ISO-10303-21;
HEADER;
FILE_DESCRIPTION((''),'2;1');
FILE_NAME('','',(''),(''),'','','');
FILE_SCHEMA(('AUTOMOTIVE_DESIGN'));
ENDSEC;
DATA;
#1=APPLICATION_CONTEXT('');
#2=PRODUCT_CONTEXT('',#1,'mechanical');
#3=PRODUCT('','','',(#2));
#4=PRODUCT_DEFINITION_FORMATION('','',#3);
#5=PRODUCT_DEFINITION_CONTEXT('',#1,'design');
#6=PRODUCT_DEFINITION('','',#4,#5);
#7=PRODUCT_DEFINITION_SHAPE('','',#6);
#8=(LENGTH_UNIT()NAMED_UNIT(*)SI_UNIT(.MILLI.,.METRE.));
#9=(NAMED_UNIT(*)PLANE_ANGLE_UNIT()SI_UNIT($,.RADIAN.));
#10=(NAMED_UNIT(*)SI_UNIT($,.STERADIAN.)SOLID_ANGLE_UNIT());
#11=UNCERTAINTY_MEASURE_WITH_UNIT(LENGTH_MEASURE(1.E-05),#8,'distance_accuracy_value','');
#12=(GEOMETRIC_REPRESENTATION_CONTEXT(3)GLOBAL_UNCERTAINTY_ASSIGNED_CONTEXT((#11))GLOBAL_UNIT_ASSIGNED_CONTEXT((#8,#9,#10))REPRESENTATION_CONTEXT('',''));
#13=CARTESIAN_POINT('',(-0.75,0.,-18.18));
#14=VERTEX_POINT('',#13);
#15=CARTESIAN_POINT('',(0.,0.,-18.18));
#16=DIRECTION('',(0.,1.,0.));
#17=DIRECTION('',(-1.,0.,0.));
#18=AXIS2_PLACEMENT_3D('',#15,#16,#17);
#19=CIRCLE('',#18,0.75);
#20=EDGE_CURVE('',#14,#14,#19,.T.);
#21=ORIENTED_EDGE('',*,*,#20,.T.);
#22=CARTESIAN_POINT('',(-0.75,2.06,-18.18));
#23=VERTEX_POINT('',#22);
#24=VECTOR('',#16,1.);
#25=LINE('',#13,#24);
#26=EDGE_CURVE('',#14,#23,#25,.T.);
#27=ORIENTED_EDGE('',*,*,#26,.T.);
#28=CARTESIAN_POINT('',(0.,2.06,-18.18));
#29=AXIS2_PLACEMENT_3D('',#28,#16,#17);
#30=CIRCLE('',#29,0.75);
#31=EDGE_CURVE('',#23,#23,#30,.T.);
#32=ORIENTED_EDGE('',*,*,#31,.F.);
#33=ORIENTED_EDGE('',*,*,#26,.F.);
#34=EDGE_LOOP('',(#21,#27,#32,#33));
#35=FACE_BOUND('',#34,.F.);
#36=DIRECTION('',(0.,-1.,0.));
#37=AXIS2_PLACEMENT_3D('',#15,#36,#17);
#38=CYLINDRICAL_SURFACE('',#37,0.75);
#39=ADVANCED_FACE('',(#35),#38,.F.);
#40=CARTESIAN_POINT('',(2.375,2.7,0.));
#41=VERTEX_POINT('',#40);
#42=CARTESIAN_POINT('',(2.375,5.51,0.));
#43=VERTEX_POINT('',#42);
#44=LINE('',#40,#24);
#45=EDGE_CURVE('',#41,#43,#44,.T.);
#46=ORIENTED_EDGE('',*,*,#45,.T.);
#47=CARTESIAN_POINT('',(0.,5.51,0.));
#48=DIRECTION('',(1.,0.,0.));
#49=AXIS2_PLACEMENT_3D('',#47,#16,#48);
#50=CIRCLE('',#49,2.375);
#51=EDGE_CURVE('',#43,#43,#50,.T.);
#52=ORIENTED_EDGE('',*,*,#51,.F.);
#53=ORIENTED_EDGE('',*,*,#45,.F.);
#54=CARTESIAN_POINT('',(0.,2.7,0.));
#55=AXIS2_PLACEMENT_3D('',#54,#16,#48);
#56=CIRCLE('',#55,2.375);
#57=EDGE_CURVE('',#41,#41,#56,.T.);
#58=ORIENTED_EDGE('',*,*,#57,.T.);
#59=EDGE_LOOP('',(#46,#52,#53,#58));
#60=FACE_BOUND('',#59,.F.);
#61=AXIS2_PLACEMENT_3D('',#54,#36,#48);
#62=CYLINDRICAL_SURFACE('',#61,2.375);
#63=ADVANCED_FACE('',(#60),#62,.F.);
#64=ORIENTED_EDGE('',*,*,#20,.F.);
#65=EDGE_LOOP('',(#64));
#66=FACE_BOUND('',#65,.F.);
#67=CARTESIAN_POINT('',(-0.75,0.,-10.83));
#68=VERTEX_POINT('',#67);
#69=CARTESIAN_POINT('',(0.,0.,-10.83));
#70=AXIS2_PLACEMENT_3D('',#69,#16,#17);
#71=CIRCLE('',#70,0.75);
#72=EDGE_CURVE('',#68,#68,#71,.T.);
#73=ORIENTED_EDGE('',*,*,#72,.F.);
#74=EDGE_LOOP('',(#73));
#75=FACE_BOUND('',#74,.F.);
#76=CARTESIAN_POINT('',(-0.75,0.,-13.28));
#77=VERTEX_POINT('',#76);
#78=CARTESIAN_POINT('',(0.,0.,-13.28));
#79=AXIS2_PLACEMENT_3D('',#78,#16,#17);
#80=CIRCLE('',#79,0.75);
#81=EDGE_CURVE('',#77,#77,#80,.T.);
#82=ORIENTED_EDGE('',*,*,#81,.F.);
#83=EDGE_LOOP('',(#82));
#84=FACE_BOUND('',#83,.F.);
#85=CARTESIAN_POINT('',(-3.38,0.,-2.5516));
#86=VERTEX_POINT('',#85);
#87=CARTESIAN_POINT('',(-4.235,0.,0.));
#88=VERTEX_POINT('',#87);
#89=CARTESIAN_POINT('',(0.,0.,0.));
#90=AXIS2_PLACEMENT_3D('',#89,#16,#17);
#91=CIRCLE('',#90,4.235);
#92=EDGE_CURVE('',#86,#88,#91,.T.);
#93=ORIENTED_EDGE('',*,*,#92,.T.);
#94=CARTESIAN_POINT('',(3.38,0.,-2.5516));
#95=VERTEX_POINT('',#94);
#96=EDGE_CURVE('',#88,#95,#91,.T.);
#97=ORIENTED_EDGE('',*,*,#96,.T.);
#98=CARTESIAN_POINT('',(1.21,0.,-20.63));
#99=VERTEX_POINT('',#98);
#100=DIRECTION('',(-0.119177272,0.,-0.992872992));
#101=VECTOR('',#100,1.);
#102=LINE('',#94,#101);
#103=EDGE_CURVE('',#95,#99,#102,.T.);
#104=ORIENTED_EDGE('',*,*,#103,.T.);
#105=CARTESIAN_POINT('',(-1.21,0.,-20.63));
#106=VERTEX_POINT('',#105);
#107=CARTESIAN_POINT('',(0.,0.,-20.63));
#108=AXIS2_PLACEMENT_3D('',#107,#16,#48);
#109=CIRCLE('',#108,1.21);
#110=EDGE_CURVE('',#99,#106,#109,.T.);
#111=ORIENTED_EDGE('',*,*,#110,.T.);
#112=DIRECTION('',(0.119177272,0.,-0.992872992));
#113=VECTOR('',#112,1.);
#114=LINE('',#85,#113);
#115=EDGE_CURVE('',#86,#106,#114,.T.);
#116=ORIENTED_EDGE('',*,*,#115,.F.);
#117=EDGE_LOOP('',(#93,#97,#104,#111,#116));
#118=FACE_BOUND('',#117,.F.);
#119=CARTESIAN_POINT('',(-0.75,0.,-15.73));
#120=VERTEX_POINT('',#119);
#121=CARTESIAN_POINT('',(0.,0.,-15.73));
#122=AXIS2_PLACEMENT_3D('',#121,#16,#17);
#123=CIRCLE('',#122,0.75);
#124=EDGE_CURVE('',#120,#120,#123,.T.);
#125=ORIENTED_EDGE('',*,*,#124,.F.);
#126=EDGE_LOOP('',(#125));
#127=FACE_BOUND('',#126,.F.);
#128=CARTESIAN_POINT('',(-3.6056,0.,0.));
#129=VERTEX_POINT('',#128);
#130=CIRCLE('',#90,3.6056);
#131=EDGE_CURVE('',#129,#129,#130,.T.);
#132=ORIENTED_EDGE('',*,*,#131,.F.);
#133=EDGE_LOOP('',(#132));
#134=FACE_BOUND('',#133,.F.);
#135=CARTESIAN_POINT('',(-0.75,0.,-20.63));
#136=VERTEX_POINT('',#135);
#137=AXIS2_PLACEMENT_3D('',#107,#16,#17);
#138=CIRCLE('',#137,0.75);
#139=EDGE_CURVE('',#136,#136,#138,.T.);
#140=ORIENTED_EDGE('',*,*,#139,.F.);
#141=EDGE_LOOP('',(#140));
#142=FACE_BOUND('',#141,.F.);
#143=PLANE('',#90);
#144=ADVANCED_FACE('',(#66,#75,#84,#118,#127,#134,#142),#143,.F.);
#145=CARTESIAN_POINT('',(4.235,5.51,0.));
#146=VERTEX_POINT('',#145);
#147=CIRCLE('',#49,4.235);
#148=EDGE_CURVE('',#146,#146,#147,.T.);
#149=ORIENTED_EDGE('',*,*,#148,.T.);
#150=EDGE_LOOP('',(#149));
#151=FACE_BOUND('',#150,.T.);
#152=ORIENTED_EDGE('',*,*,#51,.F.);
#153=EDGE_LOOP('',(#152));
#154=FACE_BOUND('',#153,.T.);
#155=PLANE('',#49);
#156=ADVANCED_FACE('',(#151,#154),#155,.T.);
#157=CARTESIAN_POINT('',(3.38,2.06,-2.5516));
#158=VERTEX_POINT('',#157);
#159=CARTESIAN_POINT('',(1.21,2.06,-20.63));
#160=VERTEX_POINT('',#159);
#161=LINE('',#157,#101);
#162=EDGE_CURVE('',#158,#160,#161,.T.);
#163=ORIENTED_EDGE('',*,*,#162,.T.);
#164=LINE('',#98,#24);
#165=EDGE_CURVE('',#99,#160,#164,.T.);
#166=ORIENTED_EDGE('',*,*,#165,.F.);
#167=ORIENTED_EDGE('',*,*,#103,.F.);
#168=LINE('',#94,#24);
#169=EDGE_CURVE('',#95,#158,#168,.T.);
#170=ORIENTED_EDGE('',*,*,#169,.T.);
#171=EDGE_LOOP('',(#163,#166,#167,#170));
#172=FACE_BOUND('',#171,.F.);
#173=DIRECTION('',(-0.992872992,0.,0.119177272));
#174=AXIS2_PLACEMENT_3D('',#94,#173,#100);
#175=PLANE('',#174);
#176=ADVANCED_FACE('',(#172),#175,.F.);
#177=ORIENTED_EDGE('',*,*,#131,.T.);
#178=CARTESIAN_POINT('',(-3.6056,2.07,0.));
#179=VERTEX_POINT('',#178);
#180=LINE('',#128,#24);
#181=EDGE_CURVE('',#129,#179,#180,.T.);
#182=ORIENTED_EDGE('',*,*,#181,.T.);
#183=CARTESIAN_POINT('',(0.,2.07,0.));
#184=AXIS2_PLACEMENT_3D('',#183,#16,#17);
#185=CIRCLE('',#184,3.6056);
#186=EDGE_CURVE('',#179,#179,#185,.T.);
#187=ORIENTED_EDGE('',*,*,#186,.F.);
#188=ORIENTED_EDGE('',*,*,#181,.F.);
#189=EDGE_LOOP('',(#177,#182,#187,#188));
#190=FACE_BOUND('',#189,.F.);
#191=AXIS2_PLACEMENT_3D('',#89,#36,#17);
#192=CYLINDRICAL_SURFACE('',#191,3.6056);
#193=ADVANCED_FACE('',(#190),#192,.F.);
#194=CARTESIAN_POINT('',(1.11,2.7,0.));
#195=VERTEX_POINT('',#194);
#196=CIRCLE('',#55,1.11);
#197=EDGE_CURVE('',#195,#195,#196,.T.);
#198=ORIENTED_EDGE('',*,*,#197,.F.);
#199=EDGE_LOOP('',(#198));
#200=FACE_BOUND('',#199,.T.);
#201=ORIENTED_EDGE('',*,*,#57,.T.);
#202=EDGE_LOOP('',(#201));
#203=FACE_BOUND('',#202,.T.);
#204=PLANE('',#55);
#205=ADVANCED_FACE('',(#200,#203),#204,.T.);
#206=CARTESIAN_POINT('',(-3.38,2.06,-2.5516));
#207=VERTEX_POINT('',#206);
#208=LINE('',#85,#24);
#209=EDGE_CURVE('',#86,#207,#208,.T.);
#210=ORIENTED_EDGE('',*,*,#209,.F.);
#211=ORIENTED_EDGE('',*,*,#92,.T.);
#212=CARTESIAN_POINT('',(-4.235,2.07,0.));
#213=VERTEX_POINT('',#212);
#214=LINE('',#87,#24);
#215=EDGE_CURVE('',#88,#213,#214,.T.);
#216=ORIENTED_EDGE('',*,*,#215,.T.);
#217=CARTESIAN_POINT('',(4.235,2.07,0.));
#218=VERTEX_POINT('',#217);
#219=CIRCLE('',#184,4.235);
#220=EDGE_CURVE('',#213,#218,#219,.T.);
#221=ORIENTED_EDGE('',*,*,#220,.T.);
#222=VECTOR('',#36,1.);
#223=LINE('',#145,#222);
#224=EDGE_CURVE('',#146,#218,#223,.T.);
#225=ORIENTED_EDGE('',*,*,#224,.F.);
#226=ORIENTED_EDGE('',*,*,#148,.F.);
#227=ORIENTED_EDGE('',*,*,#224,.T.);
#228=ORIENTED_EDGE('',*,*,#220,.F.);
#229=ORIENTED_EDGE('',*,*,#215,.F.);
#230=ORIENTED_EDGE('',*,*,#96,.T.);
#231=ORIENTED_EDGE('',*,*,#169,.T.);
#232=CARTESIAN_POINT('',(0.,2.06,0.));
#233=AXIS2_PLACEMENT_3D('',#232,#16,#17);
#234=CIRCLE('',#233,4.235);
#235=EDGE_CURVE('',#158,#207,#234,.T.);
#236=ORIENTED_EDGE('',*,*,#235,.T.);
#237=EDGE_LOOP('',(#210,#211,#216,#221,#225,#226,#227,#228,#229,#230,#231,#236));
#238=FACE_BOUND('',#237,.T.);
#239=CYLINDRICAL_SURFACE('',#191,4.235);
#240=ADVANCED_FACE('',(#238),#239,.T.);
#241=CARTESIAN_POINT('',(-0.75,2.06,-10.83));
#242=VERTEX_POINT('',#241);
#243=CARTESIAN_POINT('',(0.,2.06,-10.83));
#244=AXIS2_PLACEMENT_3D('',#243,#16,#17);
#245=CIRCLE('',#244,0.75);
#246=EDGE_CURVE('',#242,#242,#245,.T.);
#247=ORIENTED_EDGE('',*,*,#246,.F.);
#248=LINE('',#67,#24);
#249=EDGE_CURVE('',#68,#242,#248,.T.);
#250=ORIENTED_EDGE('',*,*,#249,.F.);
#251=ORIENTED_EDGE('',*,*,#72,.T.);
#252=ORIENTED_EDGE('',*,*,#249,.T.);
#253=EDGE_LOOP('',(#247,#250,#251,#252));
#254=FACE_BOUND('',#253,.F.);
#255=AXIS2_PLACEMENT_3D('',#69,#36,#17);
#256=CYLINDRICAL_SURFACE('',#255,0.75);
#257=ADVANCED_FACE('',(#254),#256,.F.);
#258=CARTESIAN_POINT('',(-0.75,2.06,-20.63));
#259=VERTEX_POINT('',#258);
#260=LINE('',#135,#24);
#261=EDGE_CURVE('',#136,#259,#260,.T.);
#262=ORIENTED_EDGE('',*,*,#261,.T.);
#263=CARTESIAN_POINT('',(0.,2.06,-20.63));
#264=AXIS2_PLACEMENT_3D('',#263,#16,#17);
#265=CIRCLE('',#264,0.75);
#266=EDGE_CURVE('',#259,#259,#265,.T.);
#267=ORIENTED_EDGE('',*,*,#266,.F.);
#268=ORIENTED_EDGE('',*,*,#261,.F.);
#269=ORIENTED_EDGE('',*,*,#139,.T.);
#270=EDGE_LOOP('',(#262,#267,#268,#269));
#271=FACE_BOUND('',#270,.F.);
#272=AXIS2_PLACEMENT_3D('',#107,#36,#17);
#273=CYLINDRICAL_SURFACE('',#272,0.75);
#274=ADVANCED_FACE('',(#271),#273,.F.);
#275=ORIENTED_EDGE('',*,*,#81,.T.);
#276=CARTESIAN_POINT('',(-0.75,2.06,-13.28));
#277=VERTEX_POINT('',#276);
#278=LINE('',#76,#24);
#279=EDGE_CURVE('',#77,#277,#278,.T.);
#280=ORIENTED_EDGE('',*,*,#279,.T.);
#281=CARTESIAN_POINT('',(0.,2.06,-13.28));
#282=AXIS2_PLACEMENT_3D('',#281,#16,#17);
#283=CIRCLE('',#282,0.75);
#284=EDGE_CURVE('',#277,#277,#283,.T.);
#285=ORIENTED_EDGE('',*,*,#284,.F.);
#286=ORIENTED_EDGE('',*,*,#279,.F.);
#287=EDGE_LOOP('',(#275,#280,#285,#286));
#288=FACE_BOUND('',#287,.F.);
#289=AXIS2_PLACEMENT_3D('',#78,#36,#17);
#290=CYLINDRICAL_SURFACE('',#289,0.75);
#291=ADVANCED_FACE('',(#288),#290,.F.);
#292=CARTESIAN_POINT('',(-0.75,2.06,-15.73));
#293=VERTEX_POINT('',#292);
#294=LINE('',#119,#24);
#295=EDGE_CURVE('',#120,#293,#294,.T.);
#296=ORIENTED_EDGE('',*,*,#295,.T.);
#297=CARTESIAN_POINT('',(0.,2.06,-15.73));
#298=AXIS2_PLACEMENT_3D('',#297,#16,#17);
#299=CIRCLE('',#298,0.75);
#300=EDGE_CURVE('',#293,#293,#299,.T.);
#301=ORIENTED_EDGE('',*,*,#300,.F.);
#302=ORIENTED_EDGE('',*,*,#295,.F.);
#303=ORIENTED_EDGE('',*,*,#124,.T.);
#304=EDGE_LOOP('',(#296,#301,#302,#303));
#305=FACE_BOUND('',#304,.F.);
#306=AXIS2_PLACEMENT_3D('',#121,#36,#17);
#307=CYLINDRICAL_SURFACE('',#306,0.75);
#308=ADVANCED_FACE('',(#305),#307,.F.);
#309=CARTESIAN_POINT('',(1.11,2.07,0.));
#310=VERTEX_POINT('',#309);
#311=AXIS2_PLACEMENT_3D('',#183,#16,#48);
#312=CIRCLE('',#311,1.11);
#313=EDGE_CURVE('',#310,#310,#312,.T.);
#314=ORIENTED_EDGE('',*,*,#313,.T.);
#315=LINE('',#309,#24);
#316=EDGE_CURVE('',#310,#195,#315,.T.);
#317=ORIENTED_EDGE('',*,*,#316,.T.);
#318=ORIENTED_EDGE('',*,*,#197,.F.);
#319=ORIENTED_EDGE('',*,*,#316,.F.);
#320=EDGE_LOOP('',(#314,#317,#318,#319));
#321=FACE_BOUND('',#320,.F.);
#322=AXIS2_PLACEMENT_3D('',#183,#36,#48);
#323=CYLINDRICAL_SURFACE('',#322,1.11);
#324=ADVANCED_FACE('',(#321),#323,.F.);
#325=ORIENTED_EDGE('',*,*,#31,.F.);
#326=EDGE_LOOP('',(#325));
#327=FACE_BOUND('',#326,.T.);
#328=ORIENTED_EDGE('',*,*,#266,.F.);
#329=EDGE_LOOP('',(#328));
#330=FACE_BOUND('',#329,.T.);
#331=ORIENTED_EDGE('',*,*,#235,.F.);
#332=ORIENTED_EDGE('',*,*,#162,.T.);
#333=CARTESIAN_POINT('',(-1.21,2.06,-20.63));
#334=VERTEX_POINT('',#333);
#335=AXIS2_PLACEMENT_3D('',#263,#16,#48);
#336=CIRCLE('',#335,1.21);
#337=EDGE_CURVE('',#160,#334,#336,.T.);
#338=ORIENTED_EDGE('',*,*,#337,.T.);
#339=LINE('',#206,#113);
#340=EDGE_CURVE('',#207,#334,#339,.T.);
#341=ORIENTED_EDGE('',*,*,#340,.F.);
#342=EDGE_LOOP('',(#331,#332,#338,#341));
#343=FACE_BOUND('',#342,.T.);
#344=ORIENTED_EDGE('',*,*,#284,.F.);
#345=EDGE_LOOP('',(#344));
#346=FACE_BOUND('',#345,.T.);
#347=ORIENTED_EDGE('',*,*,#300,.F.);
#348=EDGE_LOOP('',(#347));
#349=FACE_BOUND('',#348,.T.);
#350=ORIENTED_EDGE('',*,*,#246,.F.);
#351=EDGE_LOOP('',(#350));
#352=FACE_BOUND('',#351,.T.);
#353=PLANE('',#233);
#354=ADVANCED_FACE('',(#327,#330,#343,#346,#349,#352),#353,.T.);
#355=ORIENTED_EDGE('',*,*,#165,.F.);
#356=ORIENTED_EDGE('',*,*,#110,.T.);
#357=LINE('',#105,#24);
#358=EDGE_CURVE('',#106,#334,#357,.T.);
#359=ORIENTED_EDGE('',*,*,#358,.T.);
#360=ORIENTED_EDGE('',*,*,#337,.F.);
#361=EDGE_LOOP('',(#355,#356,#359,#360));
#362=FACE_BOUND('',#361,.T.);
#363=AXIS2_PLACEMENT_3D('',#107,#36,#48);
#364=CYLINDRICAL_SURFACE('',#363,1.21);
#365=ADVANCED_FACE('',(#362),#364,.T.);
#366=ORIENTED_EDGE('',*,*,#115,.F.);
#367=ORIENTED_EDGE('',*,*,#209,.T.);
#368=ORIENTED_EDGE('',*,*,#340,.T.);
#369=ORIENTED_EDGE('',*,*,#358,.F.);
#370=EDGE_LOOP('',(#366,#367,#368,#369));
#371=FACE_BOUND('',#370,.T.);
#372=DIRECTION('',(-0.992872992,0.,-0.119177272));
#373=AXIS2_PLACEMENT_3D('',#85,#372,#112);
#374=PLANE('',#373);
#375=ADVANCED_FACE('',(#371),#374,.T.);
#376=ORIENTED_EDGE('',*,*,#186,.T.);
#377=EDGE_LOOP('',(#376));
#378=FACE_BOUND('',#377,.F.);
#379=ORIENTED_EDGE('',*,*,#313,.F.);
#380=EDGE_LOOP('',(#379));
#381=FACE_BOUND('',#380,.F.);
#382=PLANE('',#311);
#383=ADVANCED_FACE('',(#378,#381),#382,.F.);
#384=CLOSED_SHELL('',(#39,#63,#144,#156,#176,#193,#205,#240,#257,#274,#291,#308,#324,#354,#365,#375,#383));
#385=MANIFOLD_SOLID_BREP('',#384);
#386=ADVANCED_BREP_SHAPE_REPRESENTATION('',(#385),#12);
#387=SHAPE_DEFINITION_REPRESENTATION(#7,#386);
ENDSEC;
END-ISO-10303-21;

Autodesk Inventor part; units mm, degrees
ref_plane "YZ Plane" through (0, 0, 0) normal (1, 0, 0) x (0, 1, 0)
ref_plane "XZ Plane" through (0, 0, 0) normal (0, 1, 0) x (-1, 0, 0)
ref_plane "XY Plane" through (0, 0, 0) normal (0, 0, 1) x (1, 0, 0)
sketch "Sketch1" plane through (0, 0, 0) normal (0, 1, 0) x (-1, 0, 0)
  circle A0 centre (0, 0) radius 4.235
  circle A1 centre (0, 0) radius 2.375
  circle A2 centre (0, 0) radius 1.11
  circle A3 centre (0, 0) radius 3.6056
  arc A4 (-1.21, -20.63) -> (1.21, -20.63) centre (0, -20.63) ccw
  line L0 (-3.38, -2.5516) -> (-1.21, -20.63)
  line L1 (3.38, -2.5516) -> (1.21, -20.63)
  circle A5 centre (0, -20.63) radius 0.75
  circle A6 centre (0, -18.18) radius 0.75
  circle A7 centre (0, -10.83) radius 0.75
  circle A8 centre (0, -13.28) radius 0.75
  circle A9 centre (0, -15.73) radius 0.75
  point P0 (0, -2.5516)
  dimension "d2" = 2.22
  dimension "d3" = 0.6294
  dimension "d14" = 1.5
  dimension "d15" = 0.46
  dimension "d16" = 1.5
  dimension "d17" = 0.95
  dimension "d18" = 1.5
  dimension "d19" = 1.5
  dimension "d20" = 1.5
  dimension "d21" = 0.95
  dimension "d22" = 0.95
  dimension "d23" = 0.95
  dimension "d26" = 4.75
extrude "Extrusion1" add sketch "Sketch1" along normal blind 2.07 contours A0
sketch "Sketch2" plane through (0, 2.07, 0) normal (0, 1, 0) x (1, 0, 0)
  circle A0 centre (0, 0) radius 3.6056 projected
  circle A1 centre (0, 0) radius 2.375 projected
  circle A2 centre (0, 0) radius 3.6056 projected
  circle A3 centre (0, 0) radius 4.235 projected
  circle A4 centre (0, 0) radius 1.11 projected
extrude "Extrusion2" add sketch "Sketch2" along normal blind 0.63 contours A0 | A1 | A3
sketch "Sketch3" plane through (0, 2.7, 0) normal (0, 1, 0) x (1, 0, 0)
  circle A0 centre (0, 0) radius 2.375 projected
  circle A1 centre (0, 0) radius 3.6056 projected
  circle A2 centre (0, 0) radius 4.235 projected
  circle A3 centre (0, 0) radius 1.11 projected
extrude "Extrusion3" add sketch "Sketch3" along normal blind 2.81 contours A1 | A2
extrude "Extrusion4" add sketch "Sketch1" along normal blind 2.06 contours A0 L1 A4 L0
properties part number "hornminiservo"
